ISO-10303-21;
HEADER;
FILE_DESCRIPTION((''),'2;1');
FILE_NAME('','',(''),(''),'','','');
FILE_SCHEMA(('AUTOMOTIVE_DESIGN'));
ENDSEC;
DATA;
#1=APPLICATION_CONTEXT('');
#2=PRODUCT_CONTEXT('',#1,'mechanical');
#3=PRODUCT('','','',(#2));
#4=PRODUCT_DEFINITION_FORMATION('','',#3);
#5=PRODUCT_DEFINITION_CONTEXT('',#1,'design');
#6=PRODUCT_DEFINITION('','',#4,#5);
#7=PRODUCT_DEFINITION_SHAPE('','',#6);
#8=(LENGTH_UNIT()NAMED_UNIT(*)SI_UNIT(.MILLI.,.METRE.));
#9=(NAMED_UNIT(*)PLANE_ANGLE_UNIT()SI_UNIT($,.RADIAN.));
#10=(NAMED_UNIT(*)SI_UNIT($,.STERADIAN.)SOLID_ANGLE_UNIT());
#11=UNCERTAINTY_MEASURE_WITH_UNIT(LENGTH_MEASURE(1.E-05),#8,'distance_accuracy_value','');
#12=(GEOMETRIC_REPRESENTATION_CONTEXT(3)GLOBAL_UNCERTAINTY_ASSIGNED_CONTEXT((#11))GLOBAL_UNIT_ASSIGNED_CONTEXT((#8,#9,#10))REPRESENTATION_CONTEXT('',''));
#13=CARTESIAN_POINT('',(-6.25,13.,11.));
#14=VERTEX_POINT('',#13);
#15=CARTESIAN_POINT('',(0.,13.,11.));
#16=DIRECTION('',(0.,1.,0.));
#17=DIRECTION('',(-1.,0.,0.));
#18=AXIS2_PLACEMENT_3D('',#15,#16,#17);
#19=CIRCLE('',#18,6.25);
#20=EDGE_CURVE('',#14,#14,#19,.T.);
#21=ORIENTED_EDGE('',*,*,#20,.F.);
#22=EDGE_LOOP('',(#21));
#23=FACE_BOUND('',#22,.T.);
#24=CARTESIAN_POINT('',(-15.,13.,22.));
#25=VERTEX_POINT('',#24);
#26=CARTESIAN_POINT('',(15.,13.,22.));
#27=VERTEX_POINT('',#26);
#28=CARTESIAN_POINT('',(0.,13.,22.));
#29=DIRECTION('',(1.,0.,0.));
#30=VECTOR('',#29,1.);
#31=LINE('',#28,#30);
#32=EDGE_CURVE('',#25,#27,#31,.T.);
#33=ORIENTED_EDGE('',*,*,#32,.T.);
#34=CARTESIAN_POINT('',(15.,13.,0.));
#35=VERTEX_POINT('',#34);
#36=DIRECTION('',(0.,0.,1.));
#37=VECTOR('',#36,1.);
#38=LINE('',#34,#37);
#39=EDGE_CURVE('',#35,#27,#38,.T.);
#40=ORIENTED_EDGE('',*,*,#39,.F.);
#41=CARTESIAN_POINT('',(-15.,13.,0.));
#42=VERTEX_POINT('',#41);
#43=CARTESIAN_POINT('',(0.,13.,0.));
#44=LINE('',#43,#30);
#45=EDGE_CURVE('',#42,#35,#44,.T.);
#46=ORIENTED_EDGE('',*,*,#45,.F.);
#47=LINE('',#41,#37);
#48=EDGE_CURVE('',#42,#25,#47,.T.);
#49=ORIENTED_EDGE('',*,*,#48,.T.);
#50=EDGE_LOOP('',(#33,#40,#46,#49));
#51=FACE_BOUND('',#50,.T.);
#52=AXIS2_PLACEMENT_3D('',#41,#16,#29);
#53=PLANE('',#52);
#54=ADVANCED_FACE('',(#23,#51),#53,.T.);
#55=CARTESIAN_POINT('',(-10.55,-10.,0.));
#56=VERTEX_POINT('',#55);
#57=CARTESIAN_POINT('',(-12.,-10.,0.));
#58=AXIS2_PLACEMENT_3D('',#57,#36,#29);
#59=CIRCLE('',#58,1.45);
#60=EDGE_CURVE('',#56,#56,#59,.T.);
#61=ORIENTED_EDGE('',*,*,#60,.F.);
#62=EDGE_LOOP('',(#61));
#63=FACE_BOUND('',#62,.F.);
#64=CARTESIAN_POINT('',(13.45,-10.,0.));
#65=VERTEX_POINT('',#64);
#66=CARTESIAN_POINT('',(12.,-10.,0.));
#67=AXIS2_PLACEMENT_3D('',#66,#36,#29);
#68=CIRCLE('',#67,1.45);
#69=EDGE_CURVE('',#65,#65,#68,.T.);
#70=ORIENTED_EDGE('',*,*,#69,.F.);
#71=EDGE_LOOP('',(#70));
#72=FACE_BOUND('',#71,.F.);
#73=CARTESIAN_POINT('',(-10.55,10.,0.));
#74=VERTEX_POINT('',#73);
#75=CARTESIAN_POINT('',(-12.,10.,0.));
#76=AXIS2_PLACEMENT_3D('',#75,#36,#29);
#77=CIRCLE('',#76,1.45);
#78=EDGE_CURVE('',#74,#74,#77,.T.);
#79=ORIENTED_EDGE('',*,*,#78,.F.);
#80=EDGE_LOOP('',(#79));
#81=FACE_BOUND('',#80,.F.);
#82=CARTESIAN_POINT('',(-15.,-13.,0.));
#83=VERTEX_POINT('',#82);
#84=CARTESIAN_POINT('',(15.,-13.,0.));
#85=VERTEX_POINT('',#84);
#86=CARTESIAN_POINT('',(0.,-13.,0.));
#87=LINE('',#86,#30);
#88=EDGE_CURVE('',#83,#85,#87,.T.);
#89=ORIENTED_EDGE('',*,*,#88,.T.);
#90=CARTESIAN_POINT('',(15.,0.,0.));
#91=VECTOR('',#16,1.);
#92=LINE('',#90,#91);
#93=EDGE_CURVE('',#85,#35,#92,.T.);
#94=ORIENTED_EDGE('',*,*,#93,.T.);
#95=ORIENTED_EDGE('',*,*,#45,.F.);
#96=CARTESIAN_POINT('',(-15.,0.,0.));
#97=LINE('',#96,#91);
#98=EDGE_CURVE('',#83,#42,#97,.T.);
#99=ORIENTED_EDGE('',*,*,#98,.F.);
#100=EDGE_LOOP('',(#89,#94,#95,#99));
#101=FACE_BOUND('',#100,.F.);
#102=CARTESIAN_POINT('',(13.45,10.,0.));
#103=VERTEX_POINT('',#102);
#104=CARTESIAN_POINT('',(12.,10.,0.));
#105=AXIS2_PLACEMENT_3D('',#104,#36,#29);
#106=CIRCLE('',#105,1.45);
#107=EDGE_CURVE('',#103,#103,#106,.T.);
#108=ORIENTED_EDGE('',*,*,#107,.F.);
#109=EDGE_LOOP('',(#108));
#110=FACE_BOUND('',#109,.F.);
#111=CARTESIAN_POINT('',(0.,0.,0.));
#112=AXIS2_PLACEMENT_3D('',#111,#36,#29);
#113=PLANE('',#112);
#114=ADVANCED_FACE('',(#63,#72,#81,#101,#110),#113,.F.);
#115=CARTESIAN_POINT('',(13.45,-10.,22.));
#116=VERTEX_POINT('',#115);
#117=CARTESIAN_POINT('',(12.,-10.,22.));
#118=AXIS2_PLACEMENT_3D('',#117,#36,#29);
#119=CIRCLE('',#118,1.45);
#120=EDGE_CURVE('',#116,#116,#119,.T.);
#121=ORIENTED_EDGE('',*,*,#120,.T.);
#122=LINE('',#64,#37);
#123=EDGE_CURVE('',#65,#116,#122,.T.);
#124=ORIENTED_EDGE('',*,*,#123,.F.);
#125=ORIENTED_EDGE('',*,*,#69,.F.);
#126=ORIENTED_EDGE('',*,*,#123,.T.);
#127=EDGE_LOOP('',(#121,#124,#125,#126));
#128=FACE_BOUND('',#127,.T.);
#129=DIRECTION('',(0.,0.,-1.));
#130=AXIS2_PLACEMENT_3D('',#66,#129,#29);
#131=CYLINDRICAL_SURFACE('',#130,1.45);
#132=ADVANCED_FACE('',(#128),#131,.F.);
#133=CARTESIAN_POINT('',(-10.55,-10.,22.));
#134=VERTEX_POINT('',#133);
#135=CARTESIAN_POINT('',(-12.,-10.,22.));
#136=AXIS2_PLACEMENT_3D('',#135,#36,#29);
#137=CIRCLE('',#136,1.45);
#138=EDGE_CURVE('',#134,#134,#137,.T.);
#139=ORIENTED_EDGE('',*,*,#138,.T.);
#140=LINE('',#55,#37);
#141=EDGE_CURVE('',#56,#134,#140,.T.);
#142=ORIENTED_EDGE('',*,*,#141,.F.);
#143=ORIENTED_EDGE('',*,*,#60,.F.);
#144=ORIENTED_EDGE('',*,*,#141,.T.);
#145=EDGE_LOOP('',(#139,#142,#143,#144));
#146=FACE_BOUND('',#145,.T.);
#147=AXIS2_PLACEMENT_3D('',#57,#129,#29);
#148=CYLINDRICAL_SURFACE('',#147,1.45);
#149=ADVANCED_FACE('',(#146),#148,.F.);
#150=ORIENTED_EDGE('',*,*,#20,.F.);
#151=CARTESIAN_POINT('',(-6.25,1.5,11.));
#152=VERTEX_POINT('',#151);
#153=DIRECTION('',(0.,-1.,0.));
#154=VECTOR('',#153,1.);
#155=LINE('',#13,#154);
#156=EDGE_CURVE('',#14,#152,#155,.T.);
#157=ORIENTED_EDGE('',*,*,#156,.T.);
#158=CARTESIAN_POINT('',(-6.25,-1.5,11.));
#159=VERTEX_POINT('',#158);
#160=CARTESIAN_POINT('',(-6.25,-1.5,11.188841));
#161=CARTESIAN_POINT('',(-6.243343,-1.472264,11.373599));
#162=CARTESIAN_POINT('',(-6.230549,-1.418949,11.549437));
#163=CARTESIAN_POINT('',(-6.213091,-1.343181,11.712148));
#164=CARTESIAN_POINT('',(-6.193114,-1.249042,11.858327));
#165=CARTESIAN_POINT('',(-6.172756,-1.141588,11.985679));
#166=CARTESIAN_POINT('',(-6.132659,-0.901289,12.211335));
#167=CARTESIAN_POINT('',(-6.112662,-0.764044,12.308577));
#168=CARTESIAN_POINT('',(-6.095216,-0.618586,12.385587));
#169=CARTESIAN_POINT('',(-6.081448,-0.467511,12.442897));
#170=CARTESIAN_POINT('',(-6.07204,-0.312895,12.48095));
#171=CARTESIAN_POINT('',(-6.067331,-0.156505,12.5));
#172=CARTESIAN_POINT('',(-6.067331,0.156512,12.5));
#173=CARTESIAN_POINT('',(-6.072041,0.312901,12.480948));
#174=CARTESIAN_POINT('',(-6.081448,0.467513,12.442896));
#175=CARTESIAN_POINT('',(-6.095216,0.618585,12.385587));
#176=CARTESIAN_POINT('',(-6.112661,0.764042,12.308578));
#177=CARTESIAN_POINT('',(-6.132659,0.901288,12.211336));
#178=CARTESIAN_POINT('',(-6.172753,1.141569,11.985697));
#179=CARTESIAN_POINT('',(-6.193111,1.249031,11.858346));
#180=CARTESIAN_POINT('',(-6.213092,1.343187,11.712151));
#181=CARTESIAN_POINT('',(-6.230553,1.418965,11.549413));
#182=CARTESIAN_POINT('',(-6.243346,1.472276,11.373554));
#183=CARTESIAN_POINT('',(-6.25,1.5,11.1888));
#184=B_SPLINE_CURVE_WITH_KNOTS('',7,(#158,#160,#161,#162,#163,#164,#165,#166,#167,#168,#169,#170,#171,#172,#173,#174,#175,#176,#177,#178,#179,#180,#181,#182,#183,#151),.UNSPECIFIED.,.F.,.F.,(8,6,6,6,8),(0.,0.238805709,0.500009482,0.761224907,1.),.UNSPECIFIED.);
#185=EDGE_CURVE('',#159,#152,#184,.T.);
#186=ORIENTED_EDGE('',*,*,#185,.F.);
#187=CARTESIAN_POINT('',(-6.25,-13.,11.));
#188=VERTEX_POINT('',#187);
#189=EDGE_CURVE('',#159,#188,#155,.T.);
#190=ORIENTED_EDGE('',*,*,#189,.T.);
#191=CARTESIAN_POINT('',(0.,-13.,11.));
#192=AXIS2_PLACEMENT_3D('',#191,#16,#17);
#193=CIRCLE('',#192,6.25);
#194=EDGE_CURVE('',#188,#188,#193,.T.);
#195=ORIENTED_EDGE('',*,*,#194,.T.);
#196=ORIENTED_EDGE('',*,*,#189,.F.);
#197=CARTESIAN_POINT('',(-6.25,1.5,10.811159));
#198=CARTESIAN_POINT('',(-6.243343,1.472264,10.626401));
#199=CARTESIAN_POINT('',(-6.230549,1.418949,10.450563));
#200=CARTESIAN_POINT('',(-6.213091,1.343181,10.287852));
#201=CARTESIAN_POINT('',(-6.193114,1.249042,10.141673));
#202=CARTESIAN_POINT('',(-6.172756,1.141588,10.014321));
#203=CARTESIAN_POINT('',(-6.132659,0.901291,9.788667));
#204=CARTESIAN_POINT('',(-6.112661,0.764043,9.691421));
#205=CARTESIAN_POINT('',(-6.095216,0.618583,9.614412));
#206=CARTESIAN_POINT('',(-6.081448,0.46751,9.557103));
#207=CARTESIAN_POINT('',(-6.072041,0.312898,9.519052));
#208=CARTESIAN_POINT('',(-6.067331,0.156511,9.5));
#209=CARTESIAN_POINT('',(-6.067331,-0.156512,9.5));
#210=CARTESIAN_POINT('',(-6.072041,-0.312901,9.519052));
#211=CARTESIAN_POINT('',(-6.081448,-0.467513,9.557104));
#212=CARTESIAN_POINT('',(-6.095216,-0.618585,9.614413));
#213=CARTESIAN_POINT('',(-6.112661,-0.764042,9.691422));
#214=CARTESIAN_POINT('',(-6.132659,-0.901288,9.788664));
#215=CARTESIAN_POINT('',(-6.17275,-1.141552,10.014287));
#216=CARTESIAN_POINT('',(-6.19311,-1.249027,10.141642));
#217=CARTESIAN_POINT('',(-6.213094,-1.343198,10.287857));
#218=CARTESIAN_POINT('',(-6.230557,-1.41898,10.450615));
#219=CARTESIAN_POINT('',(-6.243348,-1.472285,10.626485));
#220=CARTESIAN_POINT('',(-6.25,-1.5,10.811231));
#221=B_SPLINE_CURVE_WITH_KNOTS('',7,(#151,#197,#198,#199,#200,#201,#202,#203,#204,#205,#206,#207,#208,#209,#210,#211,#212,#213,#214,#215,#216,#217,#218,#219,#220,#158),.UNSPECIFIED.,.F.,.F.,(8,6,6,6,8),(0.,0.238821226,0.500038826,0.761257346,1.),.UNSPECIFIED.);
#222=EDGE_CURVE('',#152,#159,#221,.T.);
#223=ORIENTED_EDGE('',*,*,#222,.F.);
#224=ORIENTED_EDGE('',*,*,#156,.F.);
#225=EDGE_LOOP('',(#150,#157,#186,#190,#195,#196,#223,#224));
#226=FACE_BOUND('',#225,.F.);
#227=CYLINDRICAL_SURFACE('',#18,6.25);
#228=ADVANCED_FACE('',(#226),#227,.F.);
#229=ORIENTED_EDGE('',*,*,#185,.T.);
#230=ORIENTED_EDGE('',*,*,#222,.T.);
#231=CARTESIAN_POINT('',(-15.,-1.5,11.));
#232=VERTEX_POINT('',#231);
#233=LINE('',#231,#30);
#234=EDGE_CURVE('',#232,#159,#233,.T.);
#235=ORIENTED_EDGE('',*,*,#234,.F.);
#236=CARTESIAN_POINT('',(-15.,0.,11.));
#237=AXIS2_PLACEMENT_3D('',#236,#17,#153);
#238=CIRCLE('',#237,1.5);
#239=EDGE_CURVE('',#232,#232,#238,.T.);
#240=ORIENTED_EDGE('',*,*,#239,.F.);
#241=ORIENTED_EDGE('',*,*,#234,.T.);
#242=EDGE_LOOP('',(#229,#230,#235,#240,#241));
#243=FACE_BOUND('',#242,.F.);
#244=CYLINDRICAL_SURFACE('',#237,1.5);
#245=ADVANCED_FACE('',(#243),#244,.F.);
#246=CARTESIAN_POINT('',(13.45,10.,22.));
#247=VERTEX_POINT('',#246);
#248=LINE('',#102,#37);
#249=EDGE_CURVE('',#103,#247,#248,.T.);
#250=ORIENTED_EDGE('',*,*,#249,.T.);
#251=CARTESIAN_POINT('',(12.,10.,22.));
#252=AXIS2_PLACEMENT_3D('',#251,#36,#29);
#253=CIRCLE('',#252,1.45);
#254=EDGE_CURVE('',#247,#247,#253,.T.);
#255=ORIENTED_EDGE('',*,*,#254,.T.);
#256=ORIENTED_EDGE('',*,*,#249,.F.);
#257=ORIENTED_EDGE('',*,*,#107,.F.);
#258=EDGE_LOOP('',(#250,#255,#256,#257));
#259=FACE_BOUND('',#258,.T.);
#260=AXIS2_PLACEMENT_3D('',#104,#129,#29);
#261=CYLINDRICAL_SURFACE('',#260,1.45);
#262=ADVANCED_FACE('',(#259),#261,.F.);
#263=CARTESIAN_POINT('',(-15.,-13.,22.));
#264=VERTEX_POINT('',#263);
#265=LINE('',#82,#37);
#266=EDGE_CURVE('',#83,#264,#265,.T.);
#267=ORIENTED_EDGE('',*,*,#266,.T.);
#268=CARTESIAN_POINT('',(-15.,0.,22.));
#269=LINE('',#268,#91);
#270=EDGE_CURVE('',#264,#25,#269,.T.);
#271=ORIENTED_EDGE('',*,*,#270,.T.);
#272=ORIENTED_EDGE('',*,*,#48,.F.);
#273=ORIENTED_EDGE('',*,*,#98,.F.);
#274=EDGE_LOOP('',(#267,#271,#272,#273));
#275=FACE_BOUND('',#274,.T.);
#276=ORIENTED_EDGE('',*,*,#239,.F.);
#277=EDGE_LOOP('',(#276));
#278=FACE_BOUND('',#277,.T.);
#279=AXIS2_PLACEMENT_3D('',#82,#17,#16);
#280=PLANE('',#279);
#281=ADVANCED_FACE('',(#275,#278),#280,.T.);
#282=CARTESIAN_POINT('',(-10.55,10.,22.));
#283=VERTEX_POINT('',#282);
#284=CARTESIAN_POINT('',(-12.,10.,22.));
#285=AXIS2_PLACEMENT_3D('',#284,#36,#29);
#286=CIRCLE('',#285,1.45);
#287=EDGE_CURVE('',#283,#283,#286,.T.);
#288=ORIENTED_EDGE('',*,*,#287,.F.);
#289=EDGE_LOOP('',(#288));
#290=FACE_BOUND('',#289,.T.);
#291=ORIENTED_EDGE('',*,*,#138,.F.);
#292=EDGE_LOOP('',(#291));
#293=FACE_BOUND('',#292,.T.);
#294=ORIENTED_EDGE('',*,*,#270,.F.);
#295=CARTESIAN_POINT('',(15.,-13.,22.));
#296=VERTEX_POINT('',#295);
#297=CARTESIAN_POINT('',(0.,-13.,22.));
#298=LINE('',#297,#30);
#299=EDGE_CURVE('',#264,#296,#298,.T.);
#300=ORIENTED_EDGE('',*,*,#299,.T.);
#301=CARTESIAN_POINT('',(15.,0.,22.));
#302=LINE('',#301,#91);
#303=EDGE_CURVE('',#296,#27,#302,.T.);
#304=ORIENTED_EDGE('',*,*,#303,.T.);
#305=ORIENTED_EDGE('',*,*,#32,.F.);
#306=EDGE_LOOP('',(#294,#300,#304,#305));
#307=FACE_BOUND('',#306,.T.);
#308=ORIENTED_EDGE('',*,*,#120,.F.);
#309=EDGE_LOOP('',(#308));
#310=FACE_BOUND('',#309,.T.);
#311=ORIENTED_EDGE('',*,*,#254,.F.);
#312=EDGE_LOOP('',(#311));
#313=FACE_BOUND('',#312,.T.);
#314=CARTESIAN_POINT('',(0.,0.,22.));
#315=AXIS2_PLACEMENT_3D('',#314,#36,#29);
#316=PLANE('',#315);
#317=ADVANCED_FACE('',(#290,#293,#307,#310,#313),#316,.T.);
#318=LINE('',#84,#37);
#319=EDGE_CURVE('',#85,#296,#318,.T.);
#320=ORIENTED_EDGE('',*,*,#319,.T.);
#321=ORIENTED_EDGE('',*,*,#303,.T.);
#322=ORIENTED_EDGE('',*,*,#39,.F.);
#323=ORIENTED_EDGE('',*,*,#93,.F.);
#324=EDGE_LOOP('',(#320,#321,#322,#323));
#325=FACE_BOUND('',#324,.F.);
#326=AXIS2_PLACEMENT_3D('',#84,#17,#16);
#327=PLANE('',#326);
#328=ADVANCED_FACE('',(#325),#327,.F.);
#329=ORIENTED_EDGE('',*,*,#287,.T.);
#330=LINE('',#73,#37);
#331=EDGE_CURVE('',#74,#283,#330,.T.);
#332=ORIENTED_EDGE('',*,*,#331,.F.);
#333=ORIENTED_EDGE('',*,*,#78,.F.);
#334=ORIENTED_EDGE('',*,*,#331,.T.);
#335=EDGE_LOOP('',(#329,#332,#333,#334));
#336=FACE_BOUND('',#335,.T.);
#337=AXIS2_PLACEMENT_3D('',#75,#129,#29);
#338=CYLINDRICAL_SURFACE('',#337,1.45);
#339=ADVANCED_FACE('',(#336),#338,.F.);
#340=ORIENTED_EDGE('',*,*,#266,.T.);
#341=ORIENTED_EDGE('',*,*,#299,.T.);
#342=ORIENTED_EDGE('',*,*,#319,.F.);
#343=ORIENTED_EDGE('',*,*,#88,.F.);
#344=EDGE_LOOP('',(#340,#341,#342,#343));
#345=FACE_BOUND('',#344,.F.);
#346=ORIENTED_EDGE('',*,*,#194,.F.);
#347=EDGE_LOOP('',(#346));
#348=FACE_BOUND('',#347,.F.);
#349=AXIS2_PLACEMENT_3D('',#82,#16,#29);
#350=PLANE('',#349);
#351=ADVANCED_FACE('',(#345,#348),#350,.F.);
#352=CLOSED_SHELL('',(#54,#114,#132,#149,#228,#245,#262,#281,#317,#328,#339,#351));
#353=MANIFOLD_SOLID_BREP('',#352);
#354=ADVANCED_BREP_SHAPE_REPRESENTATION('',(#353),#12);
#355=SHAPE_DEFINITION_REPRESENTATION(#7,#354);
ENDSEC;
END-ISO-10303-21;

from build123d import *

# Parameters (mm, degrees)
F0_W     = 30
F0_H     = 26
F0_R     = 1.45
F1_DEPTH = 22
F2_R     = 6.25
F3_DEPTH = 26.001
F4_R     = 1.5
F5_DEPTH = 13


# Not quite as in the source:
# - a feature names something its author has since deleted; it is built from what else it names


with BuildPart() as f1:
    # F0 (on Top) → F1 (new body)
    with BuildSketch(Plane.XY):
        Rectangle(F0_W, F0_H)
        with Locations((-12, -10)):
            Circle(F0_R, mode=Mode.SUBTRACT)
        with Locations((12, -10)):
            Circle(F0_R, mode=Mode.SUBTRACT)
        with Locations((-12, 10)):
            Circle(F0_R, mode=Mode.SUBTRACT)
        with Locations((12, 10)):
            Circle(F0_R, mode=Mode.SUBTRACT)
    extrude(amount=F1_DEPTH)

    # F2 (on face) → F3 (cut, through all)
    with BuildSketch(Plane(origin=(0, 13, 0), x_dir=(-1, 0, 0), z_dir=(0, 1, 0))):
        with Locations((0, 11)):
            Circle(F2_R)
    extrude(amount=-F3_DEPTH, mode=Mode.SUBTRACT)

    # F4 (on face) → F5 (cut)
    with BuildSketch(Plane(origin=(-15, 0, 0), x_dir=(0, -1, 0), z_dir=(-1, 0, 0))):
        with Locations((0, 11)):
            Circle(F4_R)
    extrude(amount=-F5_DEPTH, mode=Mode.SUBTRACT)


solid = f1.part
